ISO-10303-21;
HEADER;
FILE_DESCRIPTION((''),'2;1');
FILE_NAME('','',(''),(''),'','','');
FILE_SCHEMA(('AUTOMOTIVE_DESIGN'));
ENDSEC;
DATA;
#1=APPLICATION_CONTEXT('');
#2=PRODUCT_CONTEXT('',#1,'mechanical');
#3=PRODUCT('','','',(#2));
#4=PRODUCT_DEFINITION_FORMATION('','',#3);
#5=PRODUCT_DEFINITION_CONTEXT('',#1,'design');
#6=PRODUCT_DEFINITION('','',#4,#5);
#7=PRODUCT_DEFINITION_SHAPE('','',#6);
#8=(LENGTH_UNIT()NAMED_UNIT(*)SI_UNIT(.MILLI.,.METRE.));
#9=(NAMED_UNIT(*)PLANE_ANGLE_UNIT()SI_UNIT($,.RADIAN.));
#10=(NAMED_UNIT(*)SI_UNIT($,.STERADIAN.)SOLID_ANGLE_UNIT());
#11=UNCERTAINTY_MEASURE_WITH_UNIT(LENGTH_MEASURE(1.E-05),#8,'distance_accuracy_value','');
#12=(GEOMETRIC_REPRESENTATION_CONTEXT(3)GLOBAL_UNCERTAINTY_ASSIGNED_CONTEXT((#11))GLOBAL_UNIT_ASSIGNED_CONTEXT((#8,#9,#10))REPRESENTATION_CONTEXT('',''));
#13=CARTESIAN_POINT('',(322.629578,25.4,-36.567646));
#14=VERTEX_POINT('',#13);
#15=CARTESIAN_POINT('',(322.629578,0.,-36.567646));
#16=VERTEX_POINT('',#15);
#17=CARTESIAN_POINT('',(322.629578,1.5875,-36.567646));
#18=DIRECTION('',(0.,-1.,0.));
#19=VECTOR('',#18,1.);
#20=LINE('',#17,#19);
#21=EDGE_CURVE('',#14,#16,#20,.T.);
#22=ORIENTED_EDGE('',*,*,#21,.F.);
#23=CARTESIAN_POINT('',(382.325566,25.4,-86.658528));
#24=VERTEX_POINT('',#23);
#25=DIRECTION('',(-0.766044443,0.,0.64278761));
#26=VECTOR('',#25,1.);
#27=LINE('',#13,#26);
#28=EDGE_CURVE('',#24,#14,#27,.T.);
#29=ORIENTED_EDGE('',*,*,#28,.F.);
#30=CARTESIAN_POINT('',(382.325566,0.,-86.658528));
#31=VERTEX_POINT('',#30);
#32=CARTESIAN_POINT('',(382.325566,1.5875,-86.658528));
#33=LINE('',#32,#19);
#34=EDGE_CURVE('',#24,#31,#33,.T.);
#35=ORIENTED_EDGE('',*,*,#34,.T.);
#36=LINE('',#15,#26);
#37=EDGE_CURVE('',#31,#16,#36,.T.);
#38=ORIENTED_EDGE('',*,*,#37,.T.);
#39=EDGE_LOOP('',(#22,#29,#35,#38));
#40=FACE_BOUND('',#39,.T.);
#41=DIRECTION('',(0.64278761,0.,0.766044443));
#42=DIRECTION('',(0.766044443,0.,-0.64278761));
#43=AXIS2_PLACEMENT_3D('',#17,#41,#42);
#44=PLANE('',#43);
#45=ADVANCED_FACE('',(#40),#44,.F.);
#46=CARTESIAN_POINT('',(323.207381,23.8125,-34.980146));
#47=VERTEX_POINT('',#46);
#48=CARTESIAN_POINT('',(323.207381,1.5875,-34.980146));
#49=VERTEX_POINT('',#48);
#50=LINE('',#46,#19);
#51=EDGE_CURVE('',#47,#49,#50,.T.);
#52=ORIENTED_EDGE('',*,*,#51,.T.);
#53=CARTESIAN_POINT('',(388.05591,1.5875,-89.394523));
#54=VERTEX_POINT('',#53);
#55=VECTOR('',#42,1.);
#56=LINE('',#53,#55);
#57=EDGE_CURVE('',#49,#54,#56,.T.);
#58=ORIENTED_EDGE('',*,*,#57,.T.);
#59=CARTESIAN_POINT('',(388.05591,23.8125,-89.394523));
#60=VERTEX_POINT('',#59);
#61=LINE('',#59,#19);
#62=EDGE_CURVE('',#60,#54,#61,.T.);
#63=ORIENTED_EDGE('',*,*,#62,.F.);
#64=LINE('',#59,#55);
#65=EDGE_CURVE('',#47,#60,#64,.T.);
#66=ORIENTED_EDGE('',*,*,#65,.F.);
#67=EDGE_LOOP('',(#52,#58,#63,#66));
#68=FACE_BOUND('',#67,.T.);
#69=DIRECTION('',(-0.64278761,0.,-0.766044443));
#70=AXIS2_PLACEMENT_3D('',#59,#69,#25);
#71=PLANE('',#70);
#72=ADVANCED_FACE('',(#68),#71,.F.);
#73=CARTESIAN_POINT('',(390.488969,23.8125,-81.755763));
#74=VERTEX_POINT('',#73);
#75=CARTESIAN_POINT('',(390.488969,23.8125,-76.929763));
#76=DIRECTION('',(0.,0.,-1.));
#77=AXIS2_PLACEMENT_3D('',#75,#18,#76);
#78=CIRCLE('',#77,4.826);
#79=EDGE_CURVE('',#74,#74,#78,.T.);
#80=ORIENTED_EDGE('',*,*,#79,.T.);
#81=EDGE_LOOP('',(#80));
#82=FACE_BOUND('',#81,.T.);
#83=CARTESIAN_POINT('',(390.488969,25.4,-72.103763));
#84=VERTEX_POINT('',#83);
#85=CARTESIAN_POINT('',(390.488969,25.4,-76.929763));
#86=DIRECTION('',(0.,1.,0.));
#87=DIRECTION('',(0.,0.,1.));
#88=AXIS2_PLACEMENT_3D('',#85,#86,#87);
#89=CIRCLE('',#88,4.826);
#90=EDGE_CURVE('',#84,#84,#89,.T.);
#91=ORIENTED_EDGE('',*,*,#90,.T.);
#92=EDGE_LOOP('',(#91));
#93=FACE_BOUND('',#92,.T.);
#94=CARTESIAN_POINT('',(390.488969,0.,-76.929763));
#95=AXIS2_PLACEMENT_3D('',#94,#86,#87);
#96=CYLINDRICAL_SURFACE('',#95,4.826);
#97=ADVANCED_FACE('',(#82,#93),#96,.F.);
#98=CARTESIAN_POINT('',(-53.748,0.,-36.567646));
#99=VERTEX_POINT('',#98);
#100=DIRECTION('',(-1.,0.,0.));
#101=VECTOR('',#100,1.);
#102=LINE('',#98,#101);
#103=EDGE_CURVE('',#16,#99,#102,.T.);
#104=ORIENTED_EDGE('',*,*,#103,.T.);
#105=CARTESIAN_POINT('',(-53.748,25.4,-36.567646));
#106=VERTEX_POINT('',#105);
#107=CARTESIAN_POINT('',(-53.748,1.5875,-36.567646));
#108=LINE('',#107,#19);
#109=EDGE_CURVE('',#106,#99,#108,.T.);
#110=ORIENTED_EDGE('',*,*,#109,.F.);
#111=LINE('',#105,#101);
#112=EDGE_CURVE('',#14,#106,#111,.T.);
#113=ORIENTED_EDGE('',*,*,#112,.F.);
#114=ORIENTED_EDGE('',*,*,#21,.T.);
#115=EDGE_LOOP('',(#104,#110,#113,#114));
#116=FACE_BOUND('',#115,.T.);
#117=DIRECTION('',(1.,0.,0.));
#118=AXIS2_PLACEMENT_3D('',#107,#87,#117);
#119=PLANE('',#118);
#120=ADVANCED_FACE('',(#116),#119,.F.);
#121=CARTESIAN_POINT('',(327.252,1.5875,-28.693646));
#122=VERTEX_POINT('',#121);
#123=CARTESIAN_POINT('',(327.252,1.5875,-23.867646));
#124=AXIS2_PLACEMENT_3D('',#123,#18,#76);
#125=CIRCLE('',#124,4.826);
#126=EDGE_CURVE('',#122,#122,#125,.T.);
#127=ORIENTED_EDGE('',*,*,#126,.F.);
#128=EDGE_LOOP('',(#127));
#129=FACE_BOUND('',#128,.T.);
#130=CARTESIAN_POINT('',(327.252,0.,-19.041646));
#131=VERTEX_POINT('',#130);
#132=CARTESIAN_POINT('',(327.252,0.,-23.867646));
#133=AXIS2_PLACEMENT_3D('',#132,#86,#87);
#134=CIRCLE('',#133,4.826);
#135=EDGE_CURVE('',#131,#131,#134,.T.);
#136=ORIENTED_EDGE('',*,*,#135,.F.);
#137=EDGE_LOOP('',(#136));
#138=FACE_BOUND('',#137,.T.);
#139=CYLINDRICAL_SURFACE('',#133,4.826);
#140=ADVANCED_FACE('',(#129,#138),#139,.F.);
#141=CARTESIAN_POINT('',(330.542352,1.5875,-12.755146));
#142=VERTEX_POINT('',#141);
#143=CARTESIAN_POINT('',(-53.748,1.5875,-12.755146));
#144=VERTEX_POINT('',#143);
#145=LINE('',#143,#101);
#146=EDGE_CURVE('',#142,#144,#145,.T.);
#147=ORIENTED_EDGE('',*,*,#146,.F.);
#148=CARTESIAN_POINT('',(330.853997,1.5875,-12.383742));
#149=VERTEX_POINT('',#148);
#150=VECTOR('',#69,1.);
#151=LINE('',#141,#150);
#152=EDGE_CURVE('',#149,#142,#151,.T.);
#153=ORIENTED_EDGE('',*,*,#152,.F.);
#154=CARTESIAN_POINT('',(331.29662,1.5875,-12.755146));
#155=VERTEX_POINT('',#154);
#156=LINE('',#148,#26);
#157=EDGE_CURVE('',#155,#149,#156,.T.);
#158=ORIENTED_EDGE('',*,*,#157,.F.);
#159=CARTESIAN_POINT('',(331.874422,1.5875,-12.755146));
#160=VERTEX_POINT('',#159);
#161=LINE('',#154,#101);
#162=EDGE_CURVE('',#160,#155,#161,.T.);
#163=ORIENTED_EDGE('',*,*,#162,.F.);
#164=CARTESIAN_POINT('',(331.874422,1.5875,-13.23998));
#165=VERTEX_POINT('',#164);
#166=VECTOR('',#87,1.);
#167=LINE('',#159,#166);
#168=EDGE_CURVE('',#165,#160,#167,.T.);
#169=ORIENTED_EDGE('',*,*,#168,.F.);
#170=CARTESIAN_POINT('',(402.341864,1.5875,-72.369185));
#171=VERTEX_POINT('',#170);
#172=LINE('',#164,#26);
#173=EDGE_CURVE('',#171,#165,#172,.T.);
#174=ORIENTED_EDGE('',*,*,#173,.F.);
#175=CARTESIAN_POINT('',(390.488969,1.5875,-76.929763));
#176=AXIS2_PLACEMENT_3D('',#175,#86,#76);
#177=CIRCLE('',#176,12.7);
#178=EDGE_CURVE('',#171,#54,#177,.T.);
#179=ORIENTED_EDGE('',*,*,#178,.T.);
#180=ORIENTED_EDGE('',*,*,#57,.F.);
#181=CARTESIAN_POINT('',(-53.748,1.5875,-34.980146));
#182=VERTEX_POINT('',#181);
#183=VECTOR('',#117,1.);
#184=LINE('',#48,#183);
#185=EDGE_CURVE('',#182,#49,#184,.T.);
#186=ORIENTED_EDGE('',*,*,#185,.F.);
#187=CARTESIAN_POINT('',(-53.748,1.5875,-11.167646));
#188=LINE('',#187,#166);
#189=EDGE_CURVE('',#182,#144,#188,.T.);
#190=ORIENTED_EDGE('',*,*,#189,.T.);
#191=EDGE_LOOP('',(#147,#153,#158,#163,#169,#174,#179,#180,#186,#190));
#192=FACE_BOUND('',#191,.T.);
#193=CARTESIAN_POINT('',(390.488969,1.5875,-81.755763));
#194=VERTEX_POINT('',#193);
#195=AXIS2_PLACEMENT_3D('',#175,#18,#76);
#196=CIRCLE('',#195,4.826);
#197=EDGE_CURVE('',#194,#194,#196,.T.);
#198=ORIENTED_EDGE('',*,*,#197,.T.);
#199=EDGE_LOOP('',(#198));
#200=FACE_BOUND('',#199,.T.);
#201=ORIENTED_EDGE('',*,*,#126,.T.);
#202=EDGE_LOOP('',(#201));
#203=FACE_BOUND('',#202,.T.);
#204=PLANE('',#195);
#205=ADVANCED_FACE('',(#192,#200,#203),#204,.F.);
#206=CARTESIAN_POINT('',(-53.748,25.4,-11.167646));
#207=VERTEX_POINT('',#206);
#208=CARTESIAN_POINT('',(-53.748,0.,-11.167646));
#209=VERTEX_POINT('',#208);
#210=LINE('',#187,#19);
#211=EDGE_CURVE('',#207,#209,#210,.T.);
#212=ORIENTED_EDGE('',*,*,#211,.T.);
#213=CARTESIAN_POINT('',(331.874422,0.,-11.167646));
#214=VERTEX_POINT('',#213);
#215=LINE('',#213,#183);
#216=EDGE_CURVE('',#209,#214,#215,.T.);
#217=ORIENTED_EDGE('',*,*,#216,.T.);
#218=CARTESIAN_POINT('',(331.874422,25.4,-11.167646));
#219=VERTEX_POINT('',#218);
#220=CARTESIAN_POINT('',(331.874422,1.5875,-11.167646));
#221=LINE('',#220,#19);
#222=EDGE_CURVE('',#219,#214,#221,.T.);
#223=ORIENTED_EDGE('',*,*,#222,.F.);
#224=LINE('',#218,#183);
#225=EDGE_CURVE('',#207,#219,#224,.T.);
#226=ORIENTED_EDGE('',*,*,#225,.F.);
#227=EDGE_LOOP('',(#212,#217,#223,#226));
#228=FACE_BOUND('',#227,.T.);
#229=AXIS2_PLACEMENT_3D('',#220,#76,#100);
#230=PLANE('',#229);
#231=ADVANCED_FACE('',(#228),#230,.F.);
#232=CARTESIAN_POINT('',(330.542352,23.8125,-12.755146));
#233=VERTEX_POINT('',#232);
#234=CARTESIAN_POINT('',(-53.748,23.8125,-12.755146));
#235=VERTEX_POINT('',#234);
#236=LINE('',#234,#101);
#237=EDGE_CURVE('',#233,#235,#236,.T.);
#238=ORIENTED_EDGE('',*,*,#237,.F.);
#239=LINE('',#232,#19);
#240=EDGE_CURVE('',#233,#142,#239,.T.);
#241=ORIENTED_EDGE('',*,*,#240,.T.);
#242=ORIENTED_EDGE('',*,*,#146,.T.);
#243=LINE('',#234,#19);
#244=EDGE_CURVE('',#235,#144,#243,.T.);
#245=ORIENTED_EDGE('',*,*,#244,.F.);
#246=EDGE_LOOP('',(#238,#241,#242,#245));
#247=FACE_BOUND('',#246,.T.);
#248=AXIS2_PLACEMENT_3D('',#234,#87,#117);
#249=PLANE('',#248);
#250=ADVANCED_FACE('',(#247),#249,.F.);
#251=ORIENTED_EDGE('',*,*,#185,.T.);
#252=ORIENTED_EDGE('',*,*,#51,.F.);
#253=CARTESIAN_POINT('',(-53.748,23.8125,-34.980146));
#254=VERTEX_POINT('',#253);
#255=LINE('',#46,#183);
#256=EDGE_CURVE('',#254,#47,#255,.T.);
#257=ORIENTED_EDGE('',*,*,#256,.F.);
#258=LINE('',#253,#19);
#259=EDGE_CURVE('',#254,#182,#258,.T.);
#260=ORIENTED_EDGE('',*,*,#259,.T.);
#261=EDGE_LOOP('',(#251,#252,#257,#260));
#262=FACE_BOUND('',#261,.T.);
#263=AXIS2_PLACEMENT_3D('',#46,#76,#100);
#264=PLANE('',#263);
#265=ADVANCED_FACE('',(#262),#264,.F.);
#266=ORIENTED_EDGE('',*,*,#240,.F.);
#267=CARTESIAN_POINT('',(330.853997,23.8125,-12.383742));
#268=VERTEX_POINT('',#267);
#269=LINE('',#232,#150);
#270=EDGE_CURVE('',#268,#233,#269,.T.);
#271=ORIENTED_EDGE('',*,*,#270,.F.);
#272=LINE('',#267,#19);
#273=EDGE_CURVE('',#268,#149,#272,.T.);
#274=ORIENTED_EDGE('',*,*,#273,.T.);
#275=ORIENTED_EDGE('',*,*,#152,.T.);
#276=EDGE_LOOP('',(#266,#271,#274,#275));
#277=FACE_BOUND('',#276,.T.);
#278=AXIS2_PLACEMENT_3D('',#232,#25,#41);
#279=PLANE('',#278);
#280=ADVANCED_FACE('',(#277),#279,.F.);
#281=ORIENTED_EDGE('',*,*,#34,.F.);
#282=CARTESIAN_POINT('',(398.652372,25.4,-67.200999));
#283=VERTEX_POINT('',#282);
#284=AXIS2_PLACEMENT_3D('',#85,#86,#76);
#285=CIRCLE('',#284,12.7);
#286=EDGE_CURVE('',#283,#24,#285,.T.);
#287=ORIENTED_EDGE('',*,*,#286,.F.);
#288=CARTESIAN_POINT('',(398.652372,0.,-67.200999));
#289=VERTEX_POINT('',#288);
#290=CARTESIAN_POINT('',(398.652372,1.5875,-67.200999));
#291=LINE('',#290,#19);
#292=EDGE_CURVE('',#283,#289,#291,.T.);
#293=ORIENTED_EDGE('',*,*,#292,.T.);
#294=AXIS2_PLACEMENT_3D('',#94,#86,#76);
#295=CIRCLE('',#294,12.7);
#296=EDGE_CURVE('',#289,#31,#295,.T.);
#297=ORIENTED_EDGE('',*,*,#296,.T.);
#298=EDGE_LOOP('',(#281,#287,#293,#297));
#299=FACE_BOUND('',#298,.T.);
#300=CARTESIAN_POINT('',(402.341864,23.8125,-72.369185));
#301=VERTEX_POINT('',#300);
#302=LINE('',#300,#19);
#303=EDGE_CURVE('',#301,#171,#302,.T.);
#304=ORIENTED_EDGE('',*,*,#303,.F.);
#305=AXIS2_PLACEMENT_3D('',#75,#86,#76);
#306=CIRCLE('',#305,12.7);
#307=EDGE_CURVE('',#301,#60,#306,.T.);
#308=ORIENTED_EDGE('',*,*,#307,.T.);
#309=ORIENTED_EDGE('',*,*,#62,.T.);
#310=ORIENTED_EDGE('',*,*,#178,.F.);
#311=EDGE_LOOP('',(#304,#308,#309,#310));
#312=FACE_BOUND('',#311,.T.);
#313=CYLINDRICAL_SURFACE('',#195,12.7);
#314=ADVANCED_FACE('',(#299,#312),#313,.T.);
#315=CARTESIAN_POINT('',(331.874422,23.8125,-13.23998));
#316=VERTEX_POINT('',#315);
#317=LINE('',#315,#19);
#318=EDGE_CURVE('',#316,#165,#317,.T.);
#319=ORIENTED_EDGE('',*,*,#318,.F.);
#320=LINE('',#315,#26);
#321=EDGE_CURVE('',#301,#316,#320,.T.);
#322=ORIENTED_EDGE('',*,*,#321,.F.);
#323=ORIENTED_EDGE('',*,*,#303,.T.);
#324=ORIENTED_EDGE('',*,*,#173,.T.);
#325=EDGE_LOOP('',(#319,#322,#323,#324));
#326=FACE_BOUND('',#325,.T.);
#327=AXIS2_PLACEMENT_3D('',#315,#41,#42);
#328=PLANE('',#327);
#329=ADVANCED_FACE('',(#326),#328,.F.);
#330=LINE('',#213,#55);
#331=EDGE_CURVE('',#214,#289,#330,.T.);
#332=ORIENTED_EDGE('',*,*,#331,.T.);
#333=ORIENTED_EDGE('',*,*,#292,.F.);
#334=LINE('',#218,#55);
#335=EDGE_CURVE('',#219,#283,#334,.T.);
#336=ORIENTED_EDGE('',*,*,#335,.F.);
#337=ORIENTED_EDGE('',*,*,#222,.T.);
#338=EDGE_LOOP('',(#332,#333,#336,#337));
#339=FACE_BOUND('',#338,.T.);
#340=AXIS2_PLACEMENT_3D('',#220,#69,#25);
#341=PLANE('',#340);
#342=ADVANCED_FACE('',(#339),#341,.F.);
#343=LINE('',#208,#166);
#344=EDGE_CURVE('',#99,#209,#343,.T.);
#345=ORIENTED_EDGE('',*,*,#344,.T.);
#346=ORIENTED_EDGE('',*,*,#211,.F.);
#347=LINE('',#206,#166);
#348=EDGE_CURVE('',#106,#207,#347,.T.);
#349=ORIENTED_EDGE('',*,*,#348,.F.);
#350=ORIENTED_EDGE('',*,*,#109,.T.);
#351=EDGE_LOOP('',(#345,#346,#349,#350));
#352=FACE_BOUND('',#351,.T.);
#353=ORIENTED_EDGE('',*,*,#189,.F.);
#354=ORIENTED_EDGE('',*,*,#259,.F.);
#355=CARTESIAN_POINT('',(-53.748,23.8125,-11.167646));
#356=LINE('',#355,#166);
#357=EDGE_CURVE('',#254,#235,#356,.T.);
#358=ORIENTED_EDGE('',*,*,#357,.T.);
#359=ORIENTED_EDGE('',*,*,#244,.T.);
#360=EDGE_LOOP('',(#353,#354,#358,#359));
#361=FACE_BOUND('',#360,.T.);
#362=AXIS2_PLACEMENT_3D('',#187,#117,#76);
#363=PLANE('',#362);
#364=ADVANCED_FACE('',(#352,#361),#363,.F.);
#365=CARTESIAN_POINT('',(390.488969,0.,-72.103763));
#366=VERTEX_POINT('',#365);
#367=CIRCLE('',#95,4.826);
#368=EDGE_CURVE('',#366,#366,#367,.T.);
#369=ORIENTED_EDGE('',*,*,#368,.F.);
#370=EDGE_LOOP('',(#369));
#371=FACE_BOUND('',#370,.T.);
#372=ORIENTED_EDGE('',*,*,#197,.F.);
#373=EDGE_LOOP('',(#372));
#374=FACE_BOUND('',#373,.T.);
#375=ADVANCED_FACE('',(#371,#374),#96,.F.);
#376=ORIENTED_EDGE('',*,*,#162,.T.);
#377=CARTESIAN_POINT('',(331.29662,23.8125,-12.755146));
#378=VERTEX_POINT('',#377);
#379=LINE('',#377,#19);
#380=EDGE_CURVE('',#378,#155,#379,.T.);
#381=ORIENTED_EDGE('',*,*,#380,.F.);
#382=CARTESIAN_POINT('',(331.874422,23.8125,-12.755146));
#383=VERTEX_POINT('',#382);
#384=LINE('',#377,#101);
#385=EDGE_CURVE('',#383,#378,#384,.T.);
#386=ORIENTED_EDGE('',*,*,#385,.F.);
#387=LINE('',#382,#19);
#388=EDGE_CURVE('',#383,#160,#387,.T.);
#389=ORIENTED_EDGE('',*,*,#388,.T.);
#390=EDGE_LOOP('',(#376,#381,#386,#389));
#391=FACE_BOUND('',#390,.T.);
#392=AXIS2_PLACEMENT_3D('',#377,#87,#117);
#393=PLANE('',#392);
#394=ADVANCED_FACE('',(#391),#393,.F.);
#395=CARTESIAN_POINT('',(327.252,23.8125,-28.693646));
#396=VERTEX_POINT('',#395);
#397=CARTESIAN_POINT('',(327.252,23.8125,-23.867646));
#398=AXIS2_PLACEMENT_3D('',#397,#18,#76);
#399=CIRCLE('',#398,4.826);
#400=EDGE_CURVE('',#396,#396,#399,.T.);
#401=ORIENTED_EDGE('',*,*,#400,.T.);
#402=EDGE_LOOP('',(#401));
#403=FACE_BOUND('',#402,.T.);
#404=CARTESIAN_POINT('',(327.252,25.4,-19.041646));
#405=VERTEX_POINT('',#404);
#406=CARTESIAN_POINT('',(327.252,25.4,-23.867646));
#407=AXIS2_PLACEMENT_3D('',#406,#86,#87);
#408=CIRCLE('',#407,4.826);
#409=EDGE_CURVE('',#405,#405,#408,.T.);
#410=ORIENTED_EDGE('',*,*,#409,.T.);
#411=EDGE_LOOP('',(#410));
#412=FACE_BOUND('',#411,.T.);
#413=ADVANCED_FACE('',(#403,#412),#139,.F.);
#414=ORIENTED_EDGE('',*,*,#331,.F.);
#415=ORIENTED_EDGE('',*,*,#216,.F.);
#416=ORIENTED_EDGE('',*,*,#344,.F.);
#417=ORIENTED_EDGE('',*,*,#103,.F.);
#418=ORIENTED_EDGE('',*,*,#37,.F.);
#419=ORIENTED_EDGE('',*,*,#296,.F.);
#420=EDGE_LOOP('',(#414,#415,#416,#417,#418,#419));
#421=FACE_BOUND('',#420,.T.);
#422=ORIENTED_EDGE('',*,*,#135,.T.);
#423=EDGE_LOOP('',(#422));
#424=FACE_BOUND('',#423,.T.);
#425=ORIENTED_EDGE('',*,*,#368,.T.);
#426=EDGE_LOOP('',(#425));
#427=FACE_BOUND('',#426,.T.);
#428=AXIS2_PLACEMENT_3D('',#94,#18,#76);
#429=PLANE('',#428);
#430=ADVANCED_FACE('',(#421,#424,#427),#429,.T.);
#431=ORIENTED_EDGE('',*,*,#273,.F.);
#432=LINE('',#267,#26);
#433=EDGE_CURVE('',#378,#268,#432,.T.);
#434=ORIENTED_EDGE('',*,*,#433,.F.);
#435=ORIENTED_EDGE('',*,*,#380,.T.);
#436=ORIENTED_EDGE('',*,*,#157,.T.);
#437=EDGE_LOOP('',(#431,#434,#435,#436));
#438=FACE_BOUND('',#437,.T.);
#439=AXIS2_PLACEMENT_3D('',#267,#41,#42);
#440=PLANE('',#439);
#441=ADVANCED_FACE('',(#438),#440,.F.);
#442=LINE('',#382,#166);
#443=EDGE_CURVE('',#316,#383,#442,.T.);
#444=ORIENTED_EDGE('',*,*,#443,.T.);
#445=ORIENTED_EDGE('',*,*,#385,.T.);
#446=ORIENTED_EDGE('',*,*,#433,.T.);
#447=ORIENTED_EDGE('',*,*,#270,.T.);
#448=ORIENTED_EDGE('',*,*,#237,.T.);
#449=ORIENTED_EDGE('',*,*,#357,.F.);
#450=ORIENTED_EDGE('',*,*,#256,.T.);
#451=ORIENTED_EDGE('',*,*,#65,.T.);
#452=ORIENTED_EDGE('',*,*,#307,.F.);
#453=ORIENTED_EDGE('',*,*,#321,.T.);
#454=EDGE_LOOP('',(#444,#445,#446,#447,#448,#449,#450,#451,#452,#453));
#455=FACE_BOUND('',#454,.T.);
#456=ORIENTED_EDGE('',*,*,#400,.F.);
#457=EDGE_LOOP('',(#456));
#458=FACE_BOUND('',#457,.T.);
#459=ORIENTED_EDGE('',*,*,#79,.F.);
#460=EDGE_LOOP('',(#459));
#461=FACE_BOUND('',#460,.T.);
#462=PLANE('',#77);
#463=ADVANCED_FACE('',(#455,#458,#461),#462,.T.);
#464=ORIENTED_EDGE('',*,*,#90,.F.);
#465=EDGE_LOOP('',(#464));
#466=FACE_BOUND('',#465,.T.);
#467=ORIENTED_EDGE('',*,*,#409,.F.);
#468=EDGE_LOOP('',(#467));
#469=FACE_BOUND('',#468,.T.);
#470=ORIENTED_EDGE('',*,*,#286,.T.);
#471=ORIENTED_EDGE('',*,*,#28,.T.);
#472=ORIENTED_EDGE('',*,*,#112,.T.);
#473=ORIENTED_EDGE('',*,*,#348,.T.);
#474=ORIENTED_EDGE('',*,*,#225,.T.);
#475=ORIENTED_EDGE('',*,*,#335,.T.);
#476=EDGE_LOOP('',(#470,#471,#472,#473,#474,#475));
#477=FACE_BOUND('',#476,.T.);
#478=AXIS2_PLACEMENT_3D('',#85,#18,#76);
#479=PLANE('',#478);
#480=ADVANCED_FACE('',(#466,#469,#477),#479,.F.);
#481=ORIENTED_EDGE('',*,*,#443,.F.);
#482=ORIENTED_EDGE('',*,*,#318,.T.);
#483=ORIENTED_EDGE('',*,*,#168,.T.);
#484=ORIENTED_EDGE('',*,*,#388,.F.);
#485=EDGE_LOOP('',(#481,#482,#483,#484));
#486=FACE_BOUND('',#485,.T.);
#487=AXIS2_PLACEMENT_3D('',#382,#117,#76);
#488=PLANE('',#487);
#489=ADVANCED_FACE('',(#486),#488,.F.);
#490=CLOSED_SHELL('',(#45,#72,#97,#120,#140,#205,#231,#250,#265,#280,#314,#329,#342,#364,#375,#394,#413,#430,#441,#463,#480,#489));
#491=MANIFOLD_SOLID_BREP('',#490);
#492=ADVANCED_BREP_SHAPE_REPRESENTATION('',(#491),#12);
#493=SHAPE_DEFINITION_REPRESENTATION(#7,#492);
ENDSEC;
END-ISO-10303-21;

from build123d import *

# Parameters (mm, degrees)
BOSS_EXTRUDE5_DEPTH = 1.5875
BOSS_EXTRUDE6_DEPTH = 22.225
BOSS_EXTRUDE7_DEPTH = 22.225
BOSS_EXTRUDE8_DEPTH = 1.5875
HOLE1_OUTLINE_R     = 4.826
HOLE1_DEPTH         = 25.4
HOLE2_OUTLINE_R     = 4.826
HOLE2_DEPTH         = 25.4


# Read off the part's stored shape, not the designer's step: Hole1, Hole2
with BuildPart() as part:
    # Sketch9 → Boss-Extrude5 (new body)
    with BuildSketch(Plane(origin=(0, 0, 0), x_dir=(1, 0, 0), z_dir=(0, 1, 0))):
        with BuildLine():
            Line((322.629578317, 36.567646265), (382.325566472, 86.658527908))
            ThreePointArc((382.325566472, 86.658527908), (400.217733608, 85.093166118), (398.652371818, 67.200998981))
            Line((398.652371818, 67.200998981), (331.874422413, 11.167646265))
            Line((331.874422413, 11.167646265), (-53.747999635, 11.167646265))
            Line((-53.747999635, 11.167646265), (-53.747999635, 36.567646265))
            Line((-53.747999635, 36.567646265), (322.629578317, 36.567646265))
        make_face()
    extrude(amount=BOSS_EXTRUDE5_DEPTH)

    # Sketch11 → Boss-Extrude6 (add)
    with BuildSketch(Plane(origin=(0, 1.5875, 0), x_dir=(1, 0, 0), z_dir=(0, 1, 0))):
        with BuildLine():
            Line((323.207381137, 34.980146265), (-53.747999635, 34.980146265))
            Line((-53.747999635, 34.980146265), (-53.747999635, 36.567646265))
            Line((-53.747999635, 36.567646265), (322.62957839, 36.567646265))
            Line((322.62957839, 36.567646265), (382.325566502, 86.658527872))
            ThreePointArc((382.325566502, 86.658527872), (385.016979631, 88.390449757), (388.055909658, 89.394522629))
            Line((388.055909658, 89.394522629), (323.207381137, 34.980146265))
        make_face()
    extrude(amount=BOSS_EXTRUDE6_DEPTH)

    # Sketch12 → Boss-Extrude7 (add)
    with BuildSketch(Plane(origin=(0, 1.5875, 0), x_dir=(1, 0, 0), z_dir=(0, 1, 0))):
        with BuildLine():
            Line((331.874422341, 13.239980337), (402.341864283, 72.369184881))
            ThreePointArc((402.341864283, 72.369184881), (400.825340873, 69.550778454), (398.652371788, 67.200999017))
            Line((398.652371788, 67.200999017), (331.874422341, 11.167646265))
            Line((331.874422341, 11.167646265), (-53.747999635, 11.167646265))
            Line((-53.747999635, 11.167646265), (-53.747999635, 12.755146265))
            Line((-53.747999635, 12.755146265), (330.542351676, 12.755146265))
            Line((330.542351676, 12.755146265), (330.85399701, 12.383741818))
            Line((330.85399701, 12.383741818), (331.296619594, 12.755146265))
            Line((331.296619594, 12.755146265), (331.874422341, 12.755146265))
            Line((331.874422341, 12.755146265), (331.874422341, 13.239980337))
        make_face()
    extrude(amount=BOSS_EXTRUDE7_DEPTH)

    # Sketch13 → Boss-Extrude8 (add)
    with BuildSketch(Plane(origin=(0, 23.8125, 0), x_dir=(1, 0, 0), z_dir=(0, 1, 0))):
        with BuildLine():
            Line((322.629578317, 36.567646265), (382.325566472, 86.658527908))
            ThreePointArc((382.325566472, 86.658527908), (400.217733608, 85.093166118), (398.652371818, 67.200998981))
            Line((398.652371818, 67.200998981), (331.874422413, 11.167646265))
            Line((331.874422413, 11.167646265), (-53.747999635, 11.167646265))
            Line((-53.747999635, 11.167646265), (-53.747999635, 36.567646265))
            Line((-53.747999635, 36.567646265), (322.629578317, 36.567646265))
        make_face()
    extrude(amount=BOSS_EXTRUDE8_DEPTH)

    # Hole1 outline → Hole1 (cut)
    with BuildSketch(Plane(origin=(0, 0, 0), x_dir=(1, 0, 0), z_dir=(0, 1, 0))):
        with Locations((327.252000365, 23.867646265)):
            Circle(HOLE1_OUTLINE_R)
    extrude(amount=HOLE1_DEPTH, mode=Mode.SUBTRACT)

    # Hole2 outline → Hole2 (cut)
    with BuildSketch(Plane(origin=(0, 0, 0), x_dir=(1, 0, 0), z_dir=(0, 1, 0))):
        with Locations((390.488969145, 76.929763445)):
            Circle(HOLE2_OUTLINE_R)
    extrude(amount=HOLE2_DEPTH, mode=Mode.SUBTRACT)


solid = part.part
